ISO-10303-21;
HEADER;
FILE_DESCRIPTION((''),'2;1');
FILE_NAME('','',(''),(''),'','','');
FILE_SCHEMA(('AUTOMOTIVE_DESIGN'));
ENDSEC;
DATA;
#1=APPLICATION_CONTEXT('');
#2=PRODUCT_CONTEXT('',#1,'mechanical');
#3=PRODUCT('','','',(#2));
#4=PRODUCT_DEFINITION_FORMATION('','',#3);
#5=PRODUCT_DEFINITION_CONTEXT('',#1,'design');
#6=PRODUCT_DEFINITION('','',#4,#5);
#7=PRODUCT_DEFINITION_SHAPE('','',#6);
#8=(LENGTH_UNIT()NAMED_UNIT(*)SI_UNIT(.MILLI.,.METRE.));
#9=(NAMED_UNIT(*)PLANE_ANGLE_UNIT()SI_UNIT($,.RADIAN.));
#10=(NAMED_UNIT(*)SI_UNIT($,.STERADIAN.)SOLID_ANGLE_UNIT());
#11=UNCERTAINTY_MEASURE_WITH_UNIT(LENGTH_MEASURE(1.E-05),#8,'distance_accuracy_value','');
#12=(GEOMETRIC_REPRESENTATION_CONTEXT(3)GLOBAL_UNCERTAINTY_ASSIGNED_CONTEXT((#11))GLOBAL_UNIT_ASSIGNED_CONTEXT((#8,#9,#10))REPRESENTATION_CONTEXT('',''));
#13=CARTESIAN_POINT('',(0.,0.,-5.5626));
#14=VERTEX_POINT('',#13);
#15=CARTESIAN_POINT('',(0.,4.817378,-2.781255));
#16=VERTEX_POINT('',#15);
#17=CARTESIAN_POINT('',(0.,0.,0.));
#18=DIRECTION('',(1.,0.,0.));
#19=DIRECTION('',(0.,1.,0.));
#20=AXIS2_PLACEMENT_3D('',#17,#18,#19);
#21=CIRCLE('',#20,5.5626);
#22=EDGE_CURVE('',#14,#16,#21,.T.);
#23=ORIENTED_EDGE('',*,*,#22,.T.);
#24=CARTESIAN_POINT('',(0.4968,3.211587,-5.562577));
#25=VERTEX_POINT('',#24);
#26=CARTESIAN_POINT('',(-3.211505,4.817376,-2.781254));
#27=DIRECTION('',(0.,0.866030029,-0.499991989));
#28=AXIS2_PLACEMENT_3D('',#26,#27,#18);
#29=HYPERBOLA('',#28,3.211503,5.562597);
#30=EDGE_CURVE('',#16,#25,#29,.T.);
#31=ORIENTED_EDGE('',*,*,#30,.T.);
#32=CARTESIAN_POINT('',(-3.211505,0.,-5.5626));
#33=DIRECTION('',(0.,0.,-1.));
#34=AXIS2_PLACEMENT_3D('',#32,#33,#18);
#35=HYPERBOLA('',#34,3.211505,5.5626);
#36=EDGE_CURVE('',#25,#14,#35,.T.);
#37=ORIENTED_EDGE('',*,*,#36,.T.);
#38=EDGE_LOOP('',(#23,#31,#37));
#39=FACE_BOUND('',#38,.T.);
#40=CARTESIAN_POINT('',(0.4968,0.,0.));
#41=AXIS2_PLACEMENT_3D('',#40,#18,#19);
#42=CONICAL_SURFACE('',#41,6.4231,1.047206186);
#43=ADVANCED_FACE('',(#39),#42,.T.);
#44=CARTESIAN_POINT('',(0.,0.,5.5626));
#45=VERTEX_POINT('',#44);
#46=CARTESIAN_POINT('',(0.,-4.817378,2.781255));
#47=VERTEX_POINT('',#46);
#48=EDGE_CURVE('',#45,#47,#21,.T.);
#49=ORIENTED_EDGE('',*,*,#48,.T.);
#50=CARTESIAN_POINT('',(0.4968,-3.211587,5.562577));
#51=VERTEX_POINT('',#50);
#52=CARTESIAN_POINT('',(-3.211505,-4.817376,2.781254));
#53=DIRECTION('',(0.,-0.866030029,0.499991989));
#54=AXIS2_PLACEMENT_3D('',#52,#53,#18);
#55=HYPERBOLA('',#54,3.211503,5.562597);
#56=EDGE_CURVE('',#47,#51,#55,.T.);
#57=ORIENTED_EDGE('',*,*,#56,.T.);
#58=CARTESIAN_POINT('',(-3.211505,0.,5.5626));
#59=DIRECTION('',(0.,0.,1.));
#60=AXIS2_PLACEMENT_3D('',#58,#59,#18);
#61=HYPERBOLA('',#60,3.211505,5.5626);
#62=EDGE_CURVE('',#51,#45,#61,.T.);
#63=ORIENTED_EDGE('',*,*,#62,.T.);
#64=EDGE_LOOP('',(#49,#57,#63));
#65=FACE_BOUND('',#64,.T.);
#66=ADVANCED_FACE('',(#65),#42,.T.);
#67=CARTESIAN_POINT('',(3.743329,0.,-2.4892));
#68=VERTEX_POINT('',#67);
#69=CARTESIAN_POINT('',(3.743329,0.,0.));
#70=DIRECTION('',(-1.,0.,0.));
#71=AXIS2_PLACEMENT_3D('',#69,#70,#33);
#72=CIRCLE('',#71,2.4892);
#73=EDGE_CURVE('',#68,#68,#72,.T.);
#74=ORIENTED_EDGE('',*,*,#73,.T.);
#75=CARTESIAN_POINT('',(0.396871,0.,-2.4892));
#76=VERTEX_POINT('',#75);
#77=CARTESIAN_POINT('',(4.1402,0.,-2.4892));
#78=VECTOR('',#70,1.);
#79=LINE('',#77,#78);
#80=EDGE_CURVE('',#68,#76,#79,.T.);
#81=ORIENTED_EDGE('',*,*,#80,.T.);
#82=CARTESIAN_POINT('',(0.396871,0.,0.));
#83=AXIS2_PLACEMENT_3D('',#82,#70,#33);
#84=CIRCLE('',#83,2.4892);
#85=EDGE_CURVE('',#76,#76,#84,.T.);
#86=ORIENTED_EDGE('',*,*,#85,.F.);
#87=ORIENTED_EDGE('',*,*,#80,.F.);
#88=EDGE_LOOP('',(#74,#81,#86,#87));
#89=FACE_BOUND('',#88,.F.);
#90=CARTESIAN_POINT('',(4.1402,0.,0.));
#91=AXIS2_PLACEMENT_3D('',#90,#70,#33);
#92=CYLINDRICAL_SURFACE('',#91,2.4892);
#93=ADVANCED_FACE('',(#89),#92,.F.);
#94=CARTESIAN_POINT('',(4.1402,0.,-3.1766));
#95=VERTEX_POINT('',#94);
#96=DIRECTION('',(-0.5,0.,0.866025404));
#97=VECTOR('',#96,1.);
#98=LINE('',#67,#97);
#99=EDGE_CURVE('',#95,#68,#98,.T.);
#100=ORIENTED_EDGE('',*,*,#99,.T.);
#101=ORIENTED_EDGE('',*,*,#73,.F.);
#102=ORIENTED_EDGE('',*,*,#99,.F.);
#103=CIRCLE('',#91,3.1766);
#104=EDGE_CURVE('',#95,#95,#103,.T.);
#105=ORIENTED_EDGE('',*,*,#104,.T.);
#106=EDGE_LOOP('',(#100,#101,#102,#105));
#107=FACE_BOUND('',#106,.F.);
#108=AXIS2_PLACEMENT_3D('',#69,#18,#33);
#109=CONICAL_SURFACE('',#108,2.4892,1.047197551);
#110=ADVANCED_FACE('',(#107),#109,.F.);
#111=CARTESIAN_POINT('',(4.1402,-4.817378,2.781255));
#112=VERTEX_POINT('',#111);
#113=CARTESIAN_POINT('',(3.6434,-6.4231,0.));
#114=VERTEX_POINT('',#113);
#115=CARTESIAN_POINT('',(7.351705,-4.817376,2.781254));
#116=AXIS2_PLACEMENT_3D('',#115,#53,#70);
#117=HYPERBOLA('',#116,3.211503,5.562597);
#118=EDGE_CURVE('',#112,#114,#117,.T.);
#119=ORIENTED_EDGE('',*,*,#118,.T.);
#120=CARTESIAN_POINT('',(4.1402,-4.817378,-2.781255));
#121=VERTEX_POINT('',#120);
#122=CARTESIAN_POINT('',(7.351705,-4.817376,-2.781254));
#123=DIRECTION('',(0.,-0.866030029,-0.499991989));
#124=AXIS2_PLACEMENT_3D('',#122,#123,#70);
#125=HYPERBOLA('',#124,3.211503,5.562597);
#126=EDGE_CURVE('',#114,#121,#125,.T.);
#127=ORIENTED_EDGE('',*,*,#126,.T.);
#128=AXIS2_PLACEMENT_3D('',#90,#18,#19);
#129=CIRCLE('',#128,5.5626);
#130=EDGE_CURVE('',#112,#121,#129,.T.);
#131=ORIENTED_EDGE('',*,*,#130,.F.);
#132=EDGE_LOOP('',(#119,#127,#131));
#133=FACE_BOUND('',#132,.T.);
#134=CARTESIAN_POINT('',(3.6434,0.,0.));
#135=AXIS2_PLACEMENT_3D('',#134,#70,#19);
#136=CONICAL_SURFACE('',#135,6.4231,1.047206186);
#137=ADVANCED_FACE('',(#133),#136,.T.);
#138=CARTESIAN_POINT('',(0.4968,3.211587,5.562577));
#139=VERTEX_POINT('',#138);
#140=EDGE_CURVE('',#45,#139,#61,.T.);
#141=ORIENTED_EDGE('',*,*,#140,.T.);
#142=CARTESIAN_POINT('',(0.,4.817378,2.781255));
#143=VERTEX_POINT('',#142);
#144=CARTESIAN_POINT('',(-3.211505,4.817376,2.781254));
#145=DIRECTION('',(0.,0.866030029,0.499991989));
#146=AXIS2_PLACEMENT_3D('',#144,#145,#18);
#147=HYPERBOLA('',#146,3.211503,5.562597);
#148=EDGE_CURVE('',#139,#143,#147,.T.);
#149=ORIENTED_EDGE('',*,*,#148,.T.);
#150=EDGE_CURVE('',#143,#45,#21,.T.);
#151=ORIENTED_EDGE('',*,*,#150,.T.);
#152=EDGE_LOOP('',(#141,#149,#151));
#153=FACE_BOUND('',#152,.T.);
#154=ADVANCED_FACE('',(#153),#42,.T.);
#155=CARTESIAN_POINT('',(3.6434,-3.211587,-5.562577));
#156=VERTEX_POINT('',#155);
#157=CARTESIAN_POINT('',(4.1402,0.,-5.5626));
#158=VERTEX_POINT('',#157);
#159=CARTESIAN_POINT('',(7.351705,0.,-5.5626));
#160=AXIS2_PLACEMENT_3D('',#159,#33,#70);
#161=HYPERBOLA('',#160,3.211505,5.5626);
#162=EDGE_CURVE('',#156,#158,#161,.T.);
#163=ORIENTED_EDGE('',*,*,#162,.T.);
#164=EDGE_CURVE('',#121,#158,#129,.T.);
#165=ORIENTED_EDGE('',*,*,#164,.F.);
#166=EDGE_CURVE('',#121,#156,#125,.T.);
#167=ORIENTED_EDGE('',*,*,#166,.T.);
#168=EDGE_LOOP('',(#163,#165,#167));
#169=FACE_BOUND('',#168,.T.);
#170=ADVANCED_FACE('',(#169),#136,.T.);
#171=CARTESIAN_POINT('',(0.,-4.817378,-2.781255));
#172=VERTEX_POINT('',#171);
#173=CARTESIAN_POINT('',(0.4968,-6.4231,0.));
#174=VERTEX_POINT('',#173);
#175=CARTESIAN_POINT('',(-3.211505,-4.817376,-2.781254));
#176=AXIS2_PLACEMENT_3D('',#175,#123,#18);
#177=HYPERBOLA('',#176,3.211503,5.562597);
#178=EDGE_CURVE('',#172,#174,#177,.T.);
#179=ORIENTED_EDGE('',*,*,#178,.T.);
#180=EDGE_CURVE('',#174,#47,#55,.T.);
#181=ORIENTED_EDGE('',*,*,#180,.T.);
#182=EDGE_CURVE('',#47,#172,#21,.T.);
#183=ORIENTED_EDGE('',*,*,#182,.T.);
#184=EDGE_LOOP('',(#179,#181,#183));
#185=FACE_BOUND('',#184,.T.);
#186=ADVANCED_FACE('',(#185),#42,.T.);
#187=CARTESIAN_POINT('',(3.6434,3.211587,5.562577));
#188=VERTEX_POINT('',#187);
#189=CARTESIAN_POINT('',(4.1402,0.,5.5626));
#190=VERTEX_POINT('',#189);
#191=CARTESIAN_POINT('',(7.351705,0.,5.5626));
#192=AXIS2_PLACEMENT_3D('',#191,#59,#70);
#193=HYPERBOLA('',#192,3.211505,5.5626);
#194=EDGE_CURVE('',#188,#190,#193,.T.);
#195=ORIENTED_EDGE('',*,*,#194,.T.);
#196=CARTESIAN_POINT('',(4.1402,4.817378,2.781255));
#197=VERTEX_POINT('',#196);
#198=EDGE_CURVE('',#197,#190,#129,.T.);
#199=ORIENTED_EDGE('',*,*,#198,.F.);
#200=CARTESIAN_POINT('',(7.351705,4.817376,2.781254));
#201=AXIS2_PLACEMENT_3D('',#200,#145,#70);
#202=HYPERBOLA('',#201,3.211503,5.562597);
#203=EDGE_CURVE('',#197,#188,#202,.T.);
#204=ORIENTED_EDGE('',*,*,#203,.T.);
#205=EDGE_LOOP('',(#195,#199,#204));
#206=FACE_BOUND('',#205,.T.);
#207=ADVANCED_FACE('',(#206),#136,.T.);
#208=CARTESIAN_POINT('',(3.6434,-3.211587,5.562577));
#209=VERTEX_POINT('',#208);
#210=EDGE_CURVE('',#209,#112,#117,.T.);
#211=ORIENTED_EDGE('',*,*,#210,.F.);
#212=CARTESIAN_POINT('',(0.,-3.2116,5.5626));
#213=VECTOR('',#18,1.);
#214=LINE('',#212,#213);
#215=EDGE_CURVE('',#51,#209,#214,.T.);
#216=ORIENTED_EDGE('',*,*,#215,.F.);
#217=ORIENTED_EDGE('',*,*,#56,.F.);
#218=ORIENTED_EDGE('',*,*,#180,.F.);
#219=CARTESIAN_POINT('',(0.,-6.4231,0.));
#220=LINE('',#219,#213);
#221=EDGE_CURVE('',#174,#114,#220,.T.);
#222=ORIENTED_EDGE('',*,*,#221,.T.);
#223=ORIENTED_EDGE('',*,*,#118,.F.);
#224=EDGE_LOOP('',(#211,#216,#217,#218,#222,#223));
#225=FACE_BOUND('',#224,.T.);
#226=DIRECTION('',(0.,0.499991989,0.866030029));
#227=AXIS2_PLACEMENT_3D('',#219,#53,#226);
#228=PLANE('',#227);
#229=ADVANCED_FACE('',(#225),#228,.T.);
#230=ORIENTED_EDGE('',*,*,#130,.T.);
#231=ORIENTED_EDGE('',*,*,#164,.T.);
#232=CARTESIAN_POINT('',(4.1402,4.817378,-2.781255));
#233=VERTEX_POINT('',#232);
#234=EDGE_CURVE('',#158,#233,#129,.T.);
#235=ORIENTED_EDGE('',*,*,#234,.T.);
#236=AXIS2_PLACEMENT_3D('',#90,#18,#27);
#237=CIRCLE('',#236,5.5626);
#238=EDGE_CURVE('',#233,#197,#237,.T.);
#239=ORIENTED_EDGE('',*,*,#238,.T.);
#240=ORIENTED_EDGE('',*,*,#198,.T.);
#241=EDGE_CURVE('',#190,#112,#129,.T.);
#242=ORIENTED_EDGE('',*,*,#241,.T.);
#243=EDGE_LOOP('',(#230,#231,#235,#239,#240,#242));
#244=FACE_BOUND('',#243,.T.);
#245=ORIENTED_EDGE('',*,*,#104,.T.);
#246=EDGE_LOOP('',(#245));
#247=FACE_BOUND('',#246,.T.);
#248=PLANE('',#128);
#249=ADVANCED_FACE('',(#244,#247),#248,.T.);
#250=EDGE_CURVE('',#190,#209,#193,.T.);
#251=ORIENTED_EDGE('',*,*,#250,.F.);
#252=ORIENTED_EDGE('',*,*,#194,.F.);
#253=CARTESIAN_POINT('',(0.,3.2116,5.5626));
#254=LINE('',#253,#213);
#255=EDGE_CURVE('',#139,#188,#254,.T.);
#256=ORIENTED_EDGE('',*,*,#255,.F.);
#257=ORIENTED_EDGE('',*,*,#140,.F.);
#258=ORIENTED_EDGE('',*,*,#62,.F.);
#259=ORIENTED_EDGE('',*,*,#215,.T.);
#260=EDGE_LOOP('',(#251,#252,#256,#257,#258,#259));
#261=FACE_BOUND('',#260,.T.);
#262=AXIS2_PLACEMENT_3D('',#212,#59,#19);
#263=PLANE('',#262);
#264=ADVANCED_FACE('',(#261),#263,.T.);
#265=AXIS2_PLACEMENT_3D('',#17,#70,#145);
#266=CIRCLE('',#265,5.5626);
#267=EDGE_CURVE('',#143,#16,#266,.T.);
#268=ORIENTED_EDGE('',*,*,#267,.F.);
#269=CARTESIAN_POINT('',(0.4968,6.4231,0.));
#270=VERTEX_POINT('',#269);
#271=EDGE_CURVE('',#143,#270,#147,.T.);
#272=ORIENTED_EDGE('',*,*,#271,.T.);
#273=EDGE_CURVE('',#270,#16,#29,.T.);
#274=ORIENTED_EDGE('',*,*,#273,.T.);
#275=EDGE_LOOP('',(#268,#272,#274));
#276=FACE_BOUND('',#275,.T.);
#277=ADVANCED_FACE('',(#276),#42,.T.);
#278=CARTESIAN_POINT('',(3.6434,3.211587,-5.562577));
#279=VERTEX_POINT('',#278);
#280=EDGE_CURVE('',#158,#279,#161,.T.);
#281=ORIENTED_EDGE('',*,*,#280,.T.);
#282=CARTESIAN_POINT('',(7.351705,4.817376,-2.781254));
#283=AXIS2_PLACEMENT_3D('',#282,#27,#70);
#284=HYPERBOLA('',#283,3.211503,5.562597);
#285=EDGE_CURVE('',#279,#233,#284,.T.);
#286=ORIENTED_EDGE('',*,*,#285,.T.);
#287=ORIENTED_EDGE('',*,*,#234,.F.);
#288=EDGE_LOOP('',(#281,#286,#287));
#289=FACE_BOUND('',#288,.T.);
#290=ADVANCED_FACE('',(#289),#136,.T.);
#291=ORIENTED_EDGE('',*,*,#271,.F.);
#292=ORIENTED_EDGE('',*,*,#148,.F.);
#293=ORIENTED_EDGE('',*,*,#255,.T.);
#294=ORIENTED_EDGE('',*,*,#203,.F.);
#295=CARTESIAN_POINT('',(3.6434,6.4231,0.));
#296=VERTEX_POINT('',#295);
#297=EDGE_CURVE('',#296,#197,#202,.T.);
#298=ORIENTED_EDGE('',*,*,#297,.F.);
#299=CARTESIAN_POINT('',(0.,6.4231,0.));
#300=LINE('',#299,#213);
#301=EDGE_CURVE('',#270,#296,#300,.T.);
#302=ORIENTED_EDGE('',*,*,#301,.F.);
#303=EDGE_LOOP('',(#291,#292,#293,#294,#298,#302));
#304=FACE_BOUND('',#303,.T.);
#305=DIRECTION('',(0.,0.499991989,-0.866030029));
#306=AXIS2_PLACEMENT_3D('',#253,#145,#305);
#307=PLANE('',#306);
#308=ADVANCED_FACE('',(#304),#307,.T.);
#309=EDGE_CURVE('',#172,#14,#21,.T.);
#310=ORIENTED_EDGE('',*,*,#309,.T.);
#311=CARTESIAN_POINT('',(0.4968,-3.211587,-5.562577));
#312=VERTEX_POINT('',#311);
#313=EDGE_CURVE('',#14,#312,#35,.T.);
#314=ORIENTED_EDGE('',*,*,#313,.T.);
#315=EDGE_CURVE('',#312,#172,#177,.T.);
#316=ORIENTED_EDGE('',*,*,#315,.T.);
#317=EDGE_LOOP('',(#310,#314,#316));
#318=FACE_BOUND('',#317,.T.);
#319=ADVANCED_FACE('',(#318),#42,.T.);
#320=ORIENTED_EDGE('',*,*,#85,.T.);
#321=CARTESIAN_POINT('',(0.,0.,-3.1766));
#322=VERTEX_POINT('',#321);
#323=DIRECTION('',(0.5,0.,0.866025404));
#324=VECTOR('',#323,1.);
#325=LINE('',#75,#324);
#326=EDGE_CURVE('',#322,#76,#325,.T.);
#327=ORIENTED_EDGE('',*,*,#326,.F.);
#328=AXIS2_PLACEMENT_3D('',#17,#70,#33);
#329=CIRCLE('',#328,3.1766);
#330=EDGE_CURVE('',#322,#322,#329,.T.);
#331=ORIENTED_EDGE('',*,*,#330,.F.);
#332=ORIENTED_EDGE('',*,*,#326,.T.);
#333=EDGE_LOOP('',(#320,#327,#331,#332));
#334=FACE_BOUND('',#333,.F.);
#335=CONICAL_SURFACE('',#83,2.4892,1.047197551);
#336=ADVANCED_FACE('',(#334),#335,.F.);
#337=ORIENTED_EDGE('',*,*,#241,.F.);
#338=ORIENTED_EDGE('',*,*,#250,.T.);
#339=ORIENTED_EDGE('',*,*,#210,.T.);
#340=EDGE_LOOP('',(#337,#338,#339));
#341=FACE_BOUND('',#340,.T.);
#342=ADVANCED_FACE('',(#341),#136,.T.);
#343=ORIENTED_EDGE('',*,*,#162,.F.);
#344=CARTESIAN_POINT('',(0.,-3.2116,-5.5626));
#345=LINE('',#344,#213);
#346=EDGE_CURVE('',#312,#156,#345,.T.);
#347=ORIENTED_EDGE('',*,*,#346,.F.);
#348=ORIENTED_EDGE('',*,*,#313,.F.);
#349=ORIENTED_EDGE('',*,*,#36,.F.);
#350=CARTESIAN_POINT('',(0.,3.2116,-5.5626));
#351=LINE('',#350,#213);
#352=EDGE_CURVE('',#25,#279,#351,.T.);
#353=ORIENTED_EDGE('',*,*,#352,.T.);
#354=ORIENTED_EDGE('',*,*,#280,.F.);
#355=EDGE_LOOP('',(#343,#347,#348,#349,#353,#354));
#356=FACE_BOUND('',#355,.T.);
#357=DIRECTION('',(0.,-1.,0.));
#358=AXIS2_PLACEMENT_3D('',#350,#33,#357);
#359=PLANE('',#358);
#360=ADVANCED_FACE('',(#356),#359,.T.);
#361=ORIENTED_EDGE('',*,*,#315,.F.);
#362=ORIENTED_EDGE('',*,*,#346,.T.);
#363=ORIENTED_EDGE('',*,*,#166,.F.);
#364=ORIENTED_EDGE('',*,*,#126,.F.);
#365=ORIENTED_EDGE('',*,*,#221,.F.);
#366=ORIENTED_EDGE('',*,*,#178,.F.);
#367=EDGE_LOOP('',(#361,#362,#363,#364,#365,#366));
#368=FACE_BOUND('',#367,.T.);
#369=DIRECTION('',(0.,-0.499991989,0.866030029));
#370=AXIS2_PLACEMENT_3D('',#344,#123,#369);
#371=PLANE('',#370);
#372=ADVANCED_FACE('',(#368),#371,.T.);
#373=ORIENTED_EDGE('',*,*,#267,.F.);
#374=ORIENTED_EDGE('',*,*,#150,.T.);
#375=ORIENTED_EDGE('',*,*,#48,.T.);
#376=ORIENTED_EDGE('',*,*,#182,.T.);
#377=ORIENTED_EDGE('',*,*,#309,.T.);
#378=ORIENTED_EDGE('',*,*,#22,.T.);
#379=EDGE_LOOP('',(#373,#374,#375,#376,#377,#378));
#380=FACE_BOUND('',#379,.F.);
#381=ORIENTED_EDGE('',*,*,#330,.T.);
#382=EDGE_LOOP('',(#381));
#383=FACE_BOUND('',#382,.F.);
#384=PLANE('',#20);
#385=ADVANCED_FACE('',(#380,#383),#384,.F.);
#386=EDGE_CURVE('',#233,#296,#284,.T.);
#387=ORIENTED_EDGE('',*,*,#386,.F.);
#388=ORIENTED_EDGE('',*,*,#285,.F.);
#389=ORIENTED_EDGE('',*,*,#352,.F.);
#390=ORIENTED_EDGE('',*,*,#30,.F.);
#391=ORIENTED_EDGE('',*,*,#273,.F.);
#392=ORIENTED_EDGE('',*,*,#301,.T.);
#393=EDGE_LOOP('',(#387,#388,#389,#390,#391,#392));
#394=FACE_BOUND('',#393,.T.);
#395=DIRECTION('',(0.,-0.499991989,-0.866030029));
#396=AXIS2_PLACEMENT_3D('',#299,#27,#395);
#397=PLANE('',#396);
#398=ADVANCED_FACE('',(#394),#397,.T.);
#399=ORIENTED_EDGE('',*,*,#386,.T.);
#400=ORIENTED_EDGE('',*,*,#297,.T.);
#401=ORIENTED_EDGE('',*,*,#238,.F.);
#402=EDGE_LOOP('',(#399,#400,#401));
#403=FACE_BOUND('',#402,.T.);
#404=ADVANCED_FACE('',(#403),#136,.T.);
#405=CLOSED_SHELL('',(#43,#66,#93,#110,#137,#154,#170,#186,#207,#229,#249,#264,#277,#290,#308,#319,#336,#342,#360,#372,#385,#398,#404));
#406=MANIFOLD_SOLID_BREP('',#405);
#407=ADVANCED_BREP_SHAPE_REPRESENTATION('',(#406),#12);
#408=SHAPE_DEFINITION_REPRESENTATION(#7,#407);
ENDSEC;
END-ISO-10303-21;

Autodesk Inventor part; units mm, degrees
ref_plane "YZ Plane" through (0, 0, 0) normal (1, 0, 0) x (0, 1, 0)
ref_plane "XZ Plane" through (0, 0, 0) normal (0, 1, 0) x (-1, 0, 0)
sketch "Sketch1" plane through (0, 0, 0) normal (1, 0, 0) x (0, 1, 0)
  line L0 (-6.4231, 0) -> (-3.2116, 5.5626)
  line L1 (-3.2116, 5.5626) -> (3.2116, 5.5626)
  line L2 (3.2116, 5.5626) -> (6.4231, 0)
  line L3 (6.4231, 0) -> (3.2116, -5.5626)
  line L4 (3.2116, -5.5626) -> (-3.2116, -5.5626)
  line L5 (-3.2116, -5.5626) -> (-6.4231, 0)
  point P0 (0, 0)
  point P1 (0, 0)
  dimension "d0" = 12.8463
extrude "Body" add sketch "Sketch1" along normal blind 4.1402
sketch "Sketch2" plane through (0, 0, 0) normal (0, 0, 1) x (1, 0, 0)
  line L0 (0, 3.2116) -> (0, 6.4231) projected
  line L1 (0, 6.4231) -> (4.1402, 6.4231) projected
  line L2 (4.1402, 3.2116) -> (4.1402, 6.4231) projected
  line L3 (-0.828, 0) -> (4.9682, 0) projected
  line L4 (0.4968, 6.4231) -> (0, 5.5626)
  line L5 (3.6434, 6.4231) -> (4.1402, 5.5626)
  dimension "d3" = 30
  dimension "d4" = 30
  dimension "d5" = 11.1252
  dimension "d6" = 11.1252
revolve "Chamfer1" cut sketch "Sketch2" angle 360 about axis through (-10, 0, 0) along (1, 0, 0)
sketch "Sketch3" plane through (4.1402, 0, 0) normal (1, 0, 0) x (0, 0, -1)
  arc A0 (-2.7813, -4.8174) -> (2.7813, -4.8174) centre (0, 0) ccw projected
hole "Thread" at (4.1402, 0, 0) direction (-1, 0, 0) diameter 4.9784 end through all thread size "1/4-20 UNC" class "2B" standard "ANSI Unified Screw Threads"
chamfer "Chamfer2" distance 0.6874 angle 30 1 edges at (4.1402, 0, 2.4892) measured on face at (4.1402, -4.5118, -0.1)
chamfer "Chamfer3" distance 0.6874 angle 30 1 edges at (0, 0, 2.4892) measured on face at (0, -4.5118, -0.1)
ref_plane "Work Plane1" through (-13.3509, 0, 0) normal (0, -0.8660254, -0.5) x (1, 0, 0)
equation "\"d0\" = 1.1547 * SW"
equation "\"d1\" = KOH"
equation "\"d3\" = ANG1"
equation "\"d4\" = ANG2"
equation "\"d5\" = SW0"
equation "\"d6\" = SW01"
equation "\"d8\" = -0.5 * GD1 + 0.5 * NND"
equation "\"d40\" = -0.5 * GD1 + 0.5 * NND"
equation "\"d10\" = -0.5 * GD1 + 0.5 * NND"
equation "\"d41\" = -0.5 * GD1 + 0.5 * NND"
equation "\"ANG1\" = 30deg"
equation "\"ANG2\" = 30deg"
equation "\"NND\" = 6.35"
equation "\"KOH\" = 4.1402"
equation "\"SW\" = 11.1252"
equation "\"SW0\" = SW"
equation "\"SW01\" = SW"
equation "\"THREADDIA\" = 6.35"
equation "\"TOA\" = 30deg"
equation "\"E0\" = 1.155 * SW"
equation "\"GD1\" = 4.975185"
properties part number "AS 2465 - 1/4  UNC" material "Steel, Mild"
